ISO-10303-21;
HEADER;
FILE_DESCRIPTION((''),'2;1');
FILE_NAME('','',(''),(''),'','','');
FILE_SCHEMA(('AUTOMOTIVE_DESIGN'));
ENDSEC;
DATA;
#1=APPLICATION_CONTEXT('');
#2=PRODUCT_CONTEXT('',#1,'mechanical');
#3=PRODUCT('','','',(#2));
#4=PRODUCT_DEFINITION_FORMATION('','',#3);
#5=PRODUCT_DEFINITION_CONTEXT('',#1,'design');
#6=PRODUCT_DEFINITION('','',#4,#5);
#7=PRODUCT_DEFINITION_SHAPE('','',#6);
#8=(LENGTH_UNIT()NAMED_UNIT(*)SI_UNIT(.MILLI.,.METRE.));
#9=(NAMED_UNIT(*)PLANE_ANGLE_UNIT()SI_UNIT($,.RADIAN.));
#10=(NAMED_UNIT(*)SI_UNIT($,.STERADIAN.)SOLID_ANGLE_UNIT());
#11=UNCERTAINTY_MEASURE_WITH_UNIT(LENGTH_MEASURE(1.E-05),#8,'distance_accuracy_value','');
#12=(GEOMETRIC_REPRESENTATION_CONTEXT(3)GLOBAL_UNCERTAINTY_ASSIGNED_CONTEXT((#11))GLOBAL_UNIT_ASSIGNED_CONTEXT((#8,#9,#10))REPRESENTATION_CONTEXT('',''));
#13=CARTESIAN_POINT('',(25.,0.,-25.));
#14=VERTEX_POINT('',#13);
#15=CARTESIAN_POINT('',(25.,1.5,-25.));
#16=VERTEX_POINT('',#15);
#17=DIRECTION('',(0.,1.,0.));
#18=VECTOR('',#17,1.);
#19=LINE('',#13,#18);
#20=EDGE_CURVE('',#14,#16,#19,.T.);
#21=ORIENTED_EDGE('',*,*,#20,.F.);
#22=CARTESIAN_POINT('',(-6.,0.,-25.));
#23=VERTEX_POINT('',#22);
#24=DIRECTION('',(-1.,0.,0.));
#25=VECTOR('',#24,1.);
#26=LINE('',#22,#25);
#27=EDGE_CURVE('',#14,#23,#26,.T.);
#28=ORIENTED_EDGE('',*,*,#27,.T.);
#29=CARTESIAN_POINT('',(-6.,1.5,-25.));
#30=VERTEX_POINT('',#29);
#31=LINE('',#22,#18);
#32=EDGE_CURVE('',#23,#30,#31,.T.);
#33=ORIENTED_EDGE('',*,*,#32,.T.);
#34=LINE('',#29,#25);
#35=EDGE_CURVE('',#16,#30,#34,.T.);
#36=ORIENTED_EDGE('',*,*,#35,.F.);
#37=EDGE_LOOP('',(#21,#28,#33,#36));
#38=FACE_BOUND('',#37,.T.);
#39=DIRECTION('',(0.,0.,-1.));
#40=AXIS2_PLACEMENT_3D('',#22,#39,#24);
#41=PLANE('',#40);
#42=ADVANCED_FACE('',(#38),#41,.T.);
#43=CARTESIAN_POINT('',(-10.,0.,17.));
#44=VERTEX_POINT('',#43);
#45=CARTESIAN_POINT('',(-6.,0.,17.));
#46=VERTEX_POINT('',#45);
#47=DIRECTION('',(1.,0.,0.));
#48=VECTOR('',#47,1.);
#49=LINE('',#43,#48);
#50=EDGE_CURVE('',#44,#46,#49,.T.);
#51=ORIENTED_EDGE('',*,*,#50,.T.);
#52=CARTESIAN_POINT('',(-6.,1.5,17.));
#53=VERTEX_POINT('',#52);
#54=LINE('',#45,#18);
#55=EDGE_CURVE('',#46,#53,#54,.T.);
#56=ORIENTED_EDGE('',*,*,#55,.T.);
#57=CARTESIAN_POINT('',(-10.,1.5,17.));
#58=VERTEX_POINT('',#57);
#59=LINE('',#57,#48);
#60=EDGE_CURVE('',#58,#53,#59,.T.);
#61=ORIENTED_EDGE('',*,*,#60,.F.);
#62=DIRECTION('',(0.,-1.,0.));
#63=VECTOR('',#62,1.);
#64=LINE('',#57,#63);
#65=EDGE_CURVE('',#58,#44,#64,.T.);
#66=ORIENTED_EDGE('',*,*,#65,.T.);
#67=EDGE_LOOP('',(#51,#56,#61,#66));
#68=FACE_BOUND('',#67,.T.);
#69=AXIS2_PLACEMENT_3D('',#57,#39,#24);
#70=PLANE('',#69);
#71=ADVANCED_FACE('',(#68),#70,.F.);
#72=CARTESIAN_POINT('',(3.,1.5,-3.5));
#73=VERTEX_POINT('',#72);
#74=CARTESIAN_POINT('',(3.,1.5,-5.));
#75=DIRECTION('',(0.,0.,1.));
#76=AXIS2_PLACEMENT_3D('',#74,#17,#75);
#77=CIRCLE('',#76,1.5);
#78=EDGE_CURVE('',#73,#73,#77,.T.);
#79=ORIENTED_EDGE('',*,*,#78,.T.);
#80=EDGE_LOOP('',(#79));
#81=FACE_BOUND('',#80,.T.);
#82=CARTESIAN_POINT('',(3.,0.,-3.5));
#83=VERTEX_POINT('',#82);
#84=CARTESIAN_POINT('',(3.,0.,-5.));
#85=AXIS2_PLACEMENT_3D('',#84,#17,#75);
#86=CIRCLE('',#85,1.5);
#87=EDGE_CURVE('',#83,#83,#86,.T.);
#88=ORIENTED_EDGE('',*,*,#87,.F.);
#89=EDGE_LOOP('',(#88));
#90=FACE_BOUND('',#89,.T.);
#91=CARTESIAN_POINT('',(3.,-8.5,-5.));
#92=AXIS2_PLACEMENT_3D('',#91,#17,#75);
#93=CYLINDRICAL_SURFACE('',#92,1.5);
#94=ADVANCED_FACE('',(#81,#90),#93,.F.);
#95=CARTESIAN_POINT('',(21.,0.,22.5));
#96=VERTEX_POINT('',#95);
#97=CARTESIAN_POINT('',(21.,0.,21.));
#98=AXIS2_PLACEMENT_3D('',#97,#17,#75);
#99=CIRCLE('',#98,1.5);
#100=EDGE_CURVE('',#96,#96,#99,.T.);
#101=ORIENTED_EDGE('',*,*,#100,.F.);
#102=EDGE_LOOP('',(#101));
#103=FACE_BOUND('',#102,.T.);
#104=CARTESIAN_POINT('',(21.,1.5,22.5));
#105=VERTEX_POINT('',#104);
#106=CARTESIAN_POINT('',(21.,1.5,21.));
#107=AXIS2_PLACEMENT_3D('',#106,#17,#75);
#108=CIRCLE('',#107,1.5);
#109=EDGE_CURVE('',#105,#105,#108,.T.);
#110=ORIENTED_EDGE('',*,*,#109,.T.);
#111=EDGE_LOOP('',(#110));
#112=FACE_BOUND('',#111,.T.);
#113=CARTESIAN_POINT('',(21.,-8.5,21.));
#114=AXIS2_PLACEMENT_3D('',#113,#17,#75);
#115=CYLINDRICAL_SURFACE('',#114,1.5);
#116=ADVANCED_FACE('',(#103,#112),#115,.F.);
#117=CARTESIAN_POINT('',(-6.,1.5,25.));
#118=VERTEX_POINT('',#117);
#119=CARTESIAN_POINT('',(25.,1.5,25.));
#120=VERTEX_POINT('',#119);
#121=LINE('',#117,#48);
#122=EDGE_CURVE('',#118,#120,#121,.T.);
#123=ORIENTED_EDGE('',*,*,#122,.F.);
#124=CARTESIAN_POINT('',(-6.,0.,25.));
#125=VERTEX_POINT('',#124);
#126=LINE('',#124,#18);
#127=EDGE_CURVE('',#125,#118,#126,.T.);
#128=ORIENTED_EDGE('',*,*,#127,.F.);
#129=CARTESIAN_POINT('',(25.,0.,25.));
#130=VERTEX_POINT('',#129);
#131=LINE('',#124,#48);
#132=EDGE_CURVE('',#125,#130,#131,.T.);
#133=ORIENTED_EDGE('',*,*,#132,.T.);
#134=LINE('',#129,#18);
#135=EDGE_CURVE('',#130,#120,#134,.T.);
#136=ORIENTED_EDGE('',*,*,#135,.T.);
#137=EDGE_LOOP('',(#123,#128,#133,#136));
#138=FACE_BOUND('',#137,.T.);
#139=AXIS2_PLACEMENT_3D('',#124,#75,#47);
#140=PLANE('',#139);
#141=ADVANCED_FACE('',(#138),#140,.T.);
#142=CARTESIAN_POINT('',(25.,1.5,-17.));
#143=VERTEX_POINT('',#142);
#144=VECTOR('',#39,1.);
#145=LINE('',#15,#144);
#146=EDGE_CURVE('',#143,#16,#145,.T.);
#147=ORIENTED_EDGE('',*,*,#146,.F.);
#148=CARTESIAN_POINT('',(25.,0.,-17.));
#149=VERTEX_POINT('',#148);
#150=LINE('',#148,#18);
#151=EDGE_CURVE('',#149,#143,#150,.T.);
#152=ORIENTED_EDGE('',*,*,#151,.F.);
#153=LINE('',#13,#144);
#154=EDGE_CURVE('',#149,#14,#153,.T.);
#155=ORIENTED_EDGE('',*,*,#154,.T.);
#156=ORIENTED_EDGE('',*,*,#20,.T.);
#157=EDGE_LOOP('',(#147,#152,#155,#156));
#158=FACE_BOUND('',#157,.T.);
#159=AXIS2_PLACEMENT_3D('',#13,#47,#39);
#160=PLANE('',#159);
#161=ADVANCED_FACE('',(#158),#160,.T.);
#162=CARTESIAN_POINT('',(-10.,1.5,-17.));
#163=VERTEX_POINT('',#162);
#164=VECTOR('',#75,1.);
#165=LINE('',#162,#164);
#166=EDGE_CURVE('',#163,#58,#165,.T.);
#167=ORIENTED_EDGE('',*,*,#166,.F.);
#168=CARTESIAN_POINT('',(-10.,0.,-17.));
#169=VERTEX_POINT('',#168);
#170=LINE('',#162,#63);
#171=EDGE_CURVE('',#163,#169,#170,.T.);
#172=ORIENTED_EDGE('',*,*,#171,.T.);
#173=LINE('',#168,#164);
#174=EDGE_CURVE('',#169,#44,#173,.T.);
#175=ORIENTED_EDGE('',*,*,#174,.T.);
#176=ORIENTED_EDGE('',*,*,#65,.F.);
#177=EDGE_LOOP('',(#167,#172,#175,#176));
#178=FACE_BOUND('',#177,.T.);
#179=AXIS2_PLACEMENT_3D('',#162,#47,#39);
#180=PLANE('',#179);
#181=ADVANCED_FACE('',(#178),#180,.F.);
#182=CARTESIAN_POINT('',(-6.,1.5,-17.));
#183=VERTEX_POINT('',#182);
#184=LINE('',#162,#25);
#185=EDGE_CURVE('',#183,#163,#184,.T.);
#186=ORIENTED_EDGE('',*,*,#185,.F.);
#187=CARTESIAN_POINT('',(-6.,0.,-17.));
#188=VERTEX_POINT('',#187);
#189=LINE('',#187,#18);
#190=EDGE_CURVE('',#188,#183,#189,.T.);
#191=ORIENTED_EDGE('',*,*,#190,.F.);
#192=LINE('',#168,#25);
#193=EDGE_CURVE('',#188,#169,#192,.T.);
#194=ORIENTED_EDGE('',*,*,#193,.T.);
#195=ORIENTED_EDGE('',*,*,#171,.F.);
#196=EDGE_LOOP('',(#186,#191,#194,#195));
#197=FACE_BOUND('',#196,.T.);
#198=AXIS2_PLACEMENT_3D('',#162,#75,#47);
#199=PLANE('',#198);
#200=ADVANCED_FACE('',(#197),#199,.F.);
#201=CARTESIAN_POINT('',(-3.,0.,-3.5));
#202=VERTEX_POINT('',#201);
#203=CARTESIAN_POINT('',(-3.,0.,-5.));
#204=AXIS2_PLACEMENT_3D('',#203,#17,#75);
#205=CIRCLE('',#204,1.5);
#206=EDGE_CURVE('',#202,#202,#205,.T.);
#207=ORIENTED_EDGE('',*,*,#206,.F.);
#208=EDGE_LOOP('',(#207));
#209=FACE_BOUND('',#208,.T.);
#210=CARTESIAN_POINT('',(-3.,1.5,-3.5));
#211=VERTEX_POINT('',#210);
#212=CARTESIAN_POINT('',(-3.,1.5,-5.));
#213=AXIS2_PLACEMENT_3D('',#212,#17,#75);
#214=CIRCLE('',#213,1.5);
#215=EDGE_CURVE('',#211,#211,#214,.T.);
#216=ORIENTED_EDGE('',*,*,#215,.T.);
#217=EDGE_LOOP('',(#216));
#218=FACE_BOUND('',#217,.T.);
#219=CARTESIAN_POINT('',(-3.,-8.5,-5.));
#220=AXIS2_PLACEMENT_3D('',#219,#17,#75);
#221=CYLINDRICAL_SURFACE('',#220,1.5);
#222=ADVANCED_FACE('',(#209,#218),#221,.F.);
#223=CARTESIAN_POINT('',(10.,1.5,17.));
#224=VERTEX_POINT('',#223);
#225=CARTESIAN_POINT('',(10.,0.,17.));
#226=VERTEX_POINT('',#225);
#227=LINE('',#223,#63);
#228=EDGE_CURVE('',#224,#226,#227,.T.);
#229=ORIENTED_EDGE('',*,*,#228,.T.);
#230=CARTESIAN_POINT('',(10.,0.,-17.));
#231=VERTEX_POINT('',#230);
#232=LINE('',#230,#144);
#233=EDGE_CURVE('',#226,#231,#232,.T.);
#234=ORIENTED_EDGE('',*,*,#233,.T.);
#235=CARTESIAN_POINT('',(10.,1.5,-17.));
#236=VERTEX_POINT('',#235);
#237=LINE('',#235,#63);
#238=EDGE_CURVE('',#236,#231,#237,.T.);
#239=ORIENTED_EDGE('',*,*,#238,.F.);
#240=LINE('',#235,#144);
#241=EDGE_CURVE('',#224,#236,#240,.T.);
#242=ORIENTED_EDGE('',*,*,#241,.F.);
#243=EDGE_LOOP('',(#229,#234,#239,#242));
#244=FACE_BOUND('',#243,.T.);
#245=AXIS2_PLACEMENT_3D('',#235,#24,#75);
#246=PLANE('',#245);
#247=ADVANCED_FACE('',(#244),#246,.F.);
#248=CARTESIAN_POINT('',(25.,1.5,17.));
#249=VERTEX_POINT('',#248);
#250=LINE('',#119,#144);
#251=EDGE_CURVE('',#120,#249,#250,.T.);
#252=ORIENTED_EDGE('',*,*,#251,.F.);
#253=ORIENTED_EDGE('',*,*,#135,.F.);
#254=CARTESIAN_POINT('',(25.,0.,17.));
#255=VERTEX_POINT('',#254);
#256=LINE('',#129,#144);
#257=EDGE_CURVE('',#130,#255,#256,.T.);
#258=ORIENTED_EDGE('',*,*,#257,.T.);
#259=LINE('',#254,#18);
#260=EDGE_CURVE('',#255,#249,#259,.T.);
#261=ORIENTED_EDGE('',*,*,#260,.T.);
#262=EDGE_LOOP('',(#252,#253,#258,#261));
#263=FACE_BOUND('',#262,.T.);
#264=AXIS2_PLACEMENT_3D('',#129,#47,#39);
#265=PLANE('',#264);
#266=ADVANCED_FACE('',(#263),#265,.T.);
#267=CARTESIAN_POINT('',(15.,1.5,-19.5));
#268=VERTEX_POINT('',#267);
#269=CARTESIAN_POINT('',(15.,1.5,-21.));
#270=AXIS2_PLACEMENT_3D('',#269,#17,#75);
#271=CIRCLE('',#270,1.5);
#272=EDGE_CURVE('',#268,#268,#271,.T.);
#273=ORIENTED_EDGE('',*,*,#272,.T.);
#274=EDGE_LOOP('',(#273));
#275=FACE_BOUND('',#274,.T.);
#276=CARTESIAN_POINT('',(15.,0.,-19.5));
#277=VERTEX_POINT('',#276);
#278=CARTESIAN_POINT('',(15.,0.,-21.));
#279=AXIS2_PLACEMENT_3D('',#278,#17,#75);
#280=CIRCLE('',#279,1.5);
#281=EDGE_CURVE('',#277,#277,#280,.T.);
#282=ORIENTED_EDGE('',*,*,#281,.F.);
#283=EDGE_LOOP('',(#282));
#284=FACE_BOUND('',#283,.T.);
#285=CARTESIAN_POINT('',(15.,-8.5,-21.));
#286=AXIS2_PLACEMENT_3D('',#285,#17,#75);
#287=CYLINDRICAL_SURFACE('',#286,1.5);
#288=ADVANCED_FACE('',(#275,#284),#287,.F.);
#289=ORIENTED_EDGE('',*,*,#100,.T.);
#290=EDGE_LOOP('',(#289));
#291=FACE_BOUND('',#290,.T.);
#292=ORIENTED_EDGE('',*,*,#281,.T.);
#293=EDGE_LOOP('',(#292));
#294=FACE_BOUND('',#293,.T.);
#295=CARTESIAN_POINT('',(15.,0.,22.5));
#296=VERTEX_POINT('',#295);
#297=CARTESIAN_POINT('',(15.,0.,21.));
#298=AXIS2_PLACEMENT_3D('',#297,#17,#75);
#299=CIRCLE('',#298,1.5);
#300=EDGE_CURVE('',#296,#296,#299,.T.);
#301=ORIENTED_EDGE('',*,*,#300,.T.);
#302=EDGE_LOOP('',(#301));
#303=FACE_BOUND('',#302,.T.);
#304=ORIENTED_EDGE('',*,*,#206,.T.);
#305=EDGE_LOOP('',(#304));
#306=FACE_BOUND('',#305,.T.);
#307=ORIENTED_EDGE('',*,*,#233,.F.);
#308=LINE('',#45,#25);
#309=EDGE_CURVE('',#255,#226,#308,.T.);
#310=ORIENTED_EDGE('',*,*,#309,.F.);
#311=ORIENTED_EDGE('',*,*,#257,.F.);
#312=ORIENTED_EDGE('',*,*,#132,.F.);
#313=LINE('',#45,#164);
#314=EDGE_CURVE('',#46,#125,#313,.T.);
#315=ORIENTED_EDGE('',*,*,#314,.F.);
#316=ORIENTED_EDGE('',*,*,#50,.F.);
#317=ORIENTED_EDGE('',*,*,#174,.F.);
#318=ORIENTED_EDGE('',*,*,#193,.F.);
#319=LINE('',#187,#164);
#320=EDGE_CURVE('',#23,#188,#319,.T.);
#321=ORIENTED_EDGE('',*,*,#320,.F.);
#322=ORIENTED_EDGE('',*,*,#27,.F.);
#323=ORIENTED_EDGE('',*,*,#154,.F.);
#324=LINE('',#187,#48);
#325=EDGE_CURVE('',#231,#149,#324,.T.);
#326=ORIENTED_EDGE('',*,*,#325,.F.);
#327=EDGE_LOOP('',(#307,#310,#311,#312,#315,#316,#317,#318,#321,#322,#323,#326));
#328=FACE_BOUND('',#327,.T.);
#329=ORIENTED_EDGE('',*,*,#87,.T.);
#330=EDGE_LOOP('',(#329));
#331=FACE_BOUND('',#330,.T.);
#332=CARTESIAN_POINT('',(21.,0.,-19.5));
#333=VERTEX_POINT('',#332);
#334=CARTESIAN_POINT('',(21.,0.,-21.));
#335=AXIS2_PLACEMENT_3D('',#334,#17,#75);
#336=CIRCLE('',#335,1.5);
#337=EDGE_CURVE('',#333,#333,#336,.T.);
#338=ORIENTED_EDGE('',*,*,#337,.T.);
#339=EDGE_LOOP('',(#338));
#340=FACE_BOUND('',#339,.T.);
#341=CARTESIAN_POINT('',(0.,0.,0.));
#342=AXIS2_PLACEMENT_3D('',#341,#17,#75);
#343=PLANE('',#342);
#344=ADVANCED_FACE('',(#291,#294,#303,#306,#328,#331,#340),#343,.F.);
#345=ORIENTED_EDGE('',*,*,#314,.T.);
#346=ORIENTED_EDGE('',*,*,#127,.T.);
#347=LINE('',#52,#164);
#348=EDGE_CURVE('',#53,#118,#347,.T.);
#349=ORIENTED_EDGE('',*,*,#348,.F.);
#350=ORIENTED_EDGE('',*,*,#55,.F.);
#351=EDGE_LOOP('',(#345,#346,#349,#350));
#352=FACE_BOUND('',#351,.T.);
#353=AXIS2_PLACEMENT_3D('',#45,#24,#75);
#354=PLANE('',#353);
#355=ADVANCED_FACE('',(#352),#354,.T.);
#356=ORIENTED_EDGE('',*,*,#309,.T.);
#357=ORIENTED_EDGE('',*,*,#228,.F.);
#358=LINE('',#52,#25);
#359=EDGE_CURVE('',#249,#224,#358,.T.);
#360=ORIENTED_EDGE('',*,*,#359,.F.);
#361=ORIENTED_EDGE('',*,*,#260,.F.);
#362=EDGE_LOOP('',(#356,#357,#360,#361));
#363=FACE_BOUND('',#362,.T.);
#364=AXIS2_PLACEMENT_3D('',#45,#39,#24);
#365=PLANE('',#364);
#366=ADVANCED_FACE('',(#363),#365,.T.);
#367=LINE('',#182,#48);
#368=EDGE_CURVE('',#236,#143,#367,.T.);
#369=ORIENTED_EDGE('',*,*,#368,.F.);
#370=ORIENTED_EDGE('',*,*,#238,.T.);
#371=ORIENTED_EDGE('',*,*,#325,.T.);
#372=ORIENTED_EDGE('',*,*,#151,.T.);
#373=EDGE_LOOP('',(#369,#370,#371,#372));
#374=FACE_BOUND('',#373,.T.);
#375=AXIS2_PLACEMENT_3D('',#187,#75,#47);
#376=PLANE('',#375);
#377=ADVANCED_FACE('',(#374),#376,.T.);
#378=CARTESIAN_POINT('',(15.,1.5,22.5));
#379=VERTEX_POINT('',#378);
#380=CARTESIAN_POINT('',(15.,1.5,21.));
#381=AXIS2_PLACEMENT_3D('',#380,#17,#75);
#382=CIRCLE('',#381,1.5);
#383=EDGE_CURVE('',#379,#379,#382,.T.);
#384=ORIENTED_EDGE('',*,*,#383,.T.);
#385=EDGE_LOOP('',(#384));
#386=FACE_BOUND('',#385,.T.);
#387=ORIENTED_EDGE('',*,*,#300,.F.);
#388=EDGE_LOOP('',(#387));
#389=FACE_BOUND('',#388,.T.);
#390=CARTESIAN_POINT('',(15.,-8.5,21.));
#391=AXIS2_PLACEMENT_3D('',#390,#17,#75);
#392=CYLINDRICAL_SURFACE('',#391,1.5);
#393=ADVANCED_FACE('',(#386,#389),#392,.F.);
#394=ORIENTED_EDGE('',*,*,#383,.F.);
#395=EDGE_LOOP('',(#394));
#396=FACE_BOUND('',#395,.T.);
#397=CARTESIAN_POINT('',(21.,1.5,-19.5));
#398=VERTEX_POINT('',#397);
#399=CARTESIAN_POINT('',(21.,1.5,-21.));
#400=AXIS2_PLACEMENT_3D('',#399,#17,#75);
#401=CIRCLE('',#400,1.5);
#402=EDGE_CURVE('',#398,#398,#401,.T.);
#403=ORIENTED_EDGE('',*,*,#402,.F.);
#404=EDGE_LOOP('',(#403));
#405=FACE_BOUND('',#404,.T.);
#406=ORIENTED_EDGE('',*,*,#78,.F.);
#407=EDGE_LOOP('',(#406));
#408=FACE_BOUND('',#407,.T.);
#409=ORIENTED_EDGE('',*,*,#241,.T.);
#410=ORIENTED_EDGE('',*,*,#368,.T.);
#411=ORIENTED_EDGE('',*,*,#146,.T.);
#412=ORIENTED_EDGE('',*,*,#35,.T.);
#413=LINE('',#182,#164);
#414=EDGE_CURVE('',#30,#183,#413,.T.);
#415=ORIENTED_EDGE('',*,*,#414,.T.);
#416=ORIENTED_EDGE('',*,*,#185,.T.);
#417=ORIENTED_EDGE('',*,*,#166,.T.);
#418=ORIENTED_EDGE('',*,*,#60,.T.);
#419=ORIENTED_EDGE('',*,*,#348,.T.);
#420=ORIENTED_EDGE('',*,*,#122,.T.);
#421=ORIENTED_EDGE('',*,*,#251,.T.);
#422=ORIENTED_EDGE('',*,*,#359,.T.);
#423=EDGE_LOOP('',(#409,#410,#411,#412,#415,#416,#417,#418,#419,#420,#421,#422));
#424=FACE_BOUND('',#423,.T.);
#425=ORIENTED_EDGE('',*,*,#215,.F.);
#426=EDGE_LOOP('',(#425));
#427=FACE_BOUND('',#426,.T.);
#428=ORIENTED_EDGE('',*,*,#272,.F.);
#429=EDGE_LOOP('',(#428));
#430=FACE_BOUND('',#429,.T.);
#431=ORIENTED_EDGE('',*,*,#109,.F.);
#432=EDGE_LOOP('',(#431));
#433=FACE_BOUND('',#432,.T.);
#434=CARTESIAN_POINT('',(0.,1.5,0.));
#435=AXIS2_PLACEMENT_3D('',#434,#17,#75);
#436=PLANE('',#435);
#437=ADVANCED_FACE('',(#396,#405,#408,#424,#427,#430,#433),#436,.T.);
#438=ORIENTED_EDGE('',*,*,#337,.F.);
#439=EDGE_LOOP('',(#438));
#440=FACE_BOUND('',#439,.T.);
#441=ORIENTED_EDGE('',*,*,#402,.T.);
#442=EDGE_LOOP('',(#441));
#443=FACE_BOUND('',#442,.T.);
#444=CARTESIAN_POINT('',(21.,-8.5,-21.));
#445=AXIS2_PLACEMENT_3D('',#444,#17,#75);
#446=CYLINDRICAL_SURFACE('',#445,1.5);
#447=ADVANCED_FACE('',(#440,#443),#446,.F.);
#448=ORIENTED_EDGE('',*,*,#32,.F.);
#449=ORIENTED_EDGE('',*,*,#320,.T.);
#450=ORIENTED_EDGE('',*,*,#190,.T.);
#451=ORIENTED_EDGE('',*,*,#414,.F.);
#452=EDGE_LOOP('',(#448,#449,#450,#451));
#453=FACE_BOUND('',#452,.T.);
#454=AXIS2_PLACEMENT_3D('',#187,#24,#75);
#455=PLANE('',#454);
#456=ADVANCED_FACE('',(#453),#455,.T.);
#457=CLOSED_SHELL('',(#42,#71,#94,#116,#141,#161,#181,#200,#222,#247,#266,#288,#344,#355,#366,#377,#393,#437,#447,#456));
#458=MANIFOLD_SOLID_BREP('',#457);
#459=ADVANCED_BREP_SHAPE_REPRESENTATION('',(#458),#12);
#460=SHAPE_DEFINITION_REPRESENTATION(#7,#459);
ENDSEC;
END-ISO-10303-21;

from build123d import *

# Parameters (mm, degrees)
SKETCH1_W          = 20
SKETCH1_H          = 34
BASE_FLANGE1_DEPTH = 1.5
SKETCH2_W          = 31
SKETCH2_H          = 8
TAB1_DEPTH         = 1.5
SKETCH4_R          = 1.5
CUT_EXTRUDE1_DEPTH = 10
SKETCH5_R          = 1.5
CUT_EXTRUDE2_DEPTH = 10


# Sheet-metal steps are written as plain solids
with BuildPart() as part:
    # Sketch1 → Base-Flange1 (new body)
    with BuildSketch(Plane(origin=(0, 0, 0), x_dir=(1, 0, 0), z_dir=(0, 1, 0))):
        Rectangle(SKETCH1_W, SKETCH1_H)
    extrude(amount=BASE_FLANGE1_DEPTH)

    # Sketch2 → Tab1 (add)
    with BuildSketch(Plane(origin=(0, 1.5, 0), x_dir=(1, 0, 0), z_dir=(0, 1, 0))):
        with Locations((9.5, -21)):
            Rectangle(SKETCH2_W, SKETCH2_H)
        with Locations((9.5, 21)):
            Rectangle(SKETCH2_W, SKETCH2_H)
    extrude(amount=-TAB1_DEPTH)

    # Sketch4 → Cut-Extrude1 (cut)
    with BuildSketch(Plane(origin=(0, 1.5, 0), x_dir=(1, 0, 0), z_dir=(0, 1, 0))):
        with Locations(Location((-3, 5, 0), (0, 0, 270))):
            Circle(SKETCH4_R)
        with Locations(Location((3, 5, 0), (0, 0, 270))):
            Circle(SKETCH4_R)
    extrude(amount=-CUT_EXTRUDE1_DEPTH, mode=Mode.SUBTRACT)

    # Sketch5 → Cut-Extrude2 (cut)
    with BuildSketch(Plane(origin=(0, 1.5, 0), x_dir=(1, 0, 0), z_dir=(0, 1, 0))):
        with Locations(Location((21, 21, 0), (0, 0, 270))):
            Circle(SKETCH5_R)
        with Locations(Location((15, 21, 0), (0, 0, 270))):
            Circle(SKETCH5_R)
        with Locations(Location((15, -21, 0), (0, 0, 270))):
            Circle(SKETCH5_R)
        with Locations(Location((21, -21, 0), (0, 0, 270))):
            Circle(SKETCH5_R)
    extrude(amount=-CUT_EXTRUDE2_DEPTH, mode=Mode.SUBTRACT)


solid = part.part
